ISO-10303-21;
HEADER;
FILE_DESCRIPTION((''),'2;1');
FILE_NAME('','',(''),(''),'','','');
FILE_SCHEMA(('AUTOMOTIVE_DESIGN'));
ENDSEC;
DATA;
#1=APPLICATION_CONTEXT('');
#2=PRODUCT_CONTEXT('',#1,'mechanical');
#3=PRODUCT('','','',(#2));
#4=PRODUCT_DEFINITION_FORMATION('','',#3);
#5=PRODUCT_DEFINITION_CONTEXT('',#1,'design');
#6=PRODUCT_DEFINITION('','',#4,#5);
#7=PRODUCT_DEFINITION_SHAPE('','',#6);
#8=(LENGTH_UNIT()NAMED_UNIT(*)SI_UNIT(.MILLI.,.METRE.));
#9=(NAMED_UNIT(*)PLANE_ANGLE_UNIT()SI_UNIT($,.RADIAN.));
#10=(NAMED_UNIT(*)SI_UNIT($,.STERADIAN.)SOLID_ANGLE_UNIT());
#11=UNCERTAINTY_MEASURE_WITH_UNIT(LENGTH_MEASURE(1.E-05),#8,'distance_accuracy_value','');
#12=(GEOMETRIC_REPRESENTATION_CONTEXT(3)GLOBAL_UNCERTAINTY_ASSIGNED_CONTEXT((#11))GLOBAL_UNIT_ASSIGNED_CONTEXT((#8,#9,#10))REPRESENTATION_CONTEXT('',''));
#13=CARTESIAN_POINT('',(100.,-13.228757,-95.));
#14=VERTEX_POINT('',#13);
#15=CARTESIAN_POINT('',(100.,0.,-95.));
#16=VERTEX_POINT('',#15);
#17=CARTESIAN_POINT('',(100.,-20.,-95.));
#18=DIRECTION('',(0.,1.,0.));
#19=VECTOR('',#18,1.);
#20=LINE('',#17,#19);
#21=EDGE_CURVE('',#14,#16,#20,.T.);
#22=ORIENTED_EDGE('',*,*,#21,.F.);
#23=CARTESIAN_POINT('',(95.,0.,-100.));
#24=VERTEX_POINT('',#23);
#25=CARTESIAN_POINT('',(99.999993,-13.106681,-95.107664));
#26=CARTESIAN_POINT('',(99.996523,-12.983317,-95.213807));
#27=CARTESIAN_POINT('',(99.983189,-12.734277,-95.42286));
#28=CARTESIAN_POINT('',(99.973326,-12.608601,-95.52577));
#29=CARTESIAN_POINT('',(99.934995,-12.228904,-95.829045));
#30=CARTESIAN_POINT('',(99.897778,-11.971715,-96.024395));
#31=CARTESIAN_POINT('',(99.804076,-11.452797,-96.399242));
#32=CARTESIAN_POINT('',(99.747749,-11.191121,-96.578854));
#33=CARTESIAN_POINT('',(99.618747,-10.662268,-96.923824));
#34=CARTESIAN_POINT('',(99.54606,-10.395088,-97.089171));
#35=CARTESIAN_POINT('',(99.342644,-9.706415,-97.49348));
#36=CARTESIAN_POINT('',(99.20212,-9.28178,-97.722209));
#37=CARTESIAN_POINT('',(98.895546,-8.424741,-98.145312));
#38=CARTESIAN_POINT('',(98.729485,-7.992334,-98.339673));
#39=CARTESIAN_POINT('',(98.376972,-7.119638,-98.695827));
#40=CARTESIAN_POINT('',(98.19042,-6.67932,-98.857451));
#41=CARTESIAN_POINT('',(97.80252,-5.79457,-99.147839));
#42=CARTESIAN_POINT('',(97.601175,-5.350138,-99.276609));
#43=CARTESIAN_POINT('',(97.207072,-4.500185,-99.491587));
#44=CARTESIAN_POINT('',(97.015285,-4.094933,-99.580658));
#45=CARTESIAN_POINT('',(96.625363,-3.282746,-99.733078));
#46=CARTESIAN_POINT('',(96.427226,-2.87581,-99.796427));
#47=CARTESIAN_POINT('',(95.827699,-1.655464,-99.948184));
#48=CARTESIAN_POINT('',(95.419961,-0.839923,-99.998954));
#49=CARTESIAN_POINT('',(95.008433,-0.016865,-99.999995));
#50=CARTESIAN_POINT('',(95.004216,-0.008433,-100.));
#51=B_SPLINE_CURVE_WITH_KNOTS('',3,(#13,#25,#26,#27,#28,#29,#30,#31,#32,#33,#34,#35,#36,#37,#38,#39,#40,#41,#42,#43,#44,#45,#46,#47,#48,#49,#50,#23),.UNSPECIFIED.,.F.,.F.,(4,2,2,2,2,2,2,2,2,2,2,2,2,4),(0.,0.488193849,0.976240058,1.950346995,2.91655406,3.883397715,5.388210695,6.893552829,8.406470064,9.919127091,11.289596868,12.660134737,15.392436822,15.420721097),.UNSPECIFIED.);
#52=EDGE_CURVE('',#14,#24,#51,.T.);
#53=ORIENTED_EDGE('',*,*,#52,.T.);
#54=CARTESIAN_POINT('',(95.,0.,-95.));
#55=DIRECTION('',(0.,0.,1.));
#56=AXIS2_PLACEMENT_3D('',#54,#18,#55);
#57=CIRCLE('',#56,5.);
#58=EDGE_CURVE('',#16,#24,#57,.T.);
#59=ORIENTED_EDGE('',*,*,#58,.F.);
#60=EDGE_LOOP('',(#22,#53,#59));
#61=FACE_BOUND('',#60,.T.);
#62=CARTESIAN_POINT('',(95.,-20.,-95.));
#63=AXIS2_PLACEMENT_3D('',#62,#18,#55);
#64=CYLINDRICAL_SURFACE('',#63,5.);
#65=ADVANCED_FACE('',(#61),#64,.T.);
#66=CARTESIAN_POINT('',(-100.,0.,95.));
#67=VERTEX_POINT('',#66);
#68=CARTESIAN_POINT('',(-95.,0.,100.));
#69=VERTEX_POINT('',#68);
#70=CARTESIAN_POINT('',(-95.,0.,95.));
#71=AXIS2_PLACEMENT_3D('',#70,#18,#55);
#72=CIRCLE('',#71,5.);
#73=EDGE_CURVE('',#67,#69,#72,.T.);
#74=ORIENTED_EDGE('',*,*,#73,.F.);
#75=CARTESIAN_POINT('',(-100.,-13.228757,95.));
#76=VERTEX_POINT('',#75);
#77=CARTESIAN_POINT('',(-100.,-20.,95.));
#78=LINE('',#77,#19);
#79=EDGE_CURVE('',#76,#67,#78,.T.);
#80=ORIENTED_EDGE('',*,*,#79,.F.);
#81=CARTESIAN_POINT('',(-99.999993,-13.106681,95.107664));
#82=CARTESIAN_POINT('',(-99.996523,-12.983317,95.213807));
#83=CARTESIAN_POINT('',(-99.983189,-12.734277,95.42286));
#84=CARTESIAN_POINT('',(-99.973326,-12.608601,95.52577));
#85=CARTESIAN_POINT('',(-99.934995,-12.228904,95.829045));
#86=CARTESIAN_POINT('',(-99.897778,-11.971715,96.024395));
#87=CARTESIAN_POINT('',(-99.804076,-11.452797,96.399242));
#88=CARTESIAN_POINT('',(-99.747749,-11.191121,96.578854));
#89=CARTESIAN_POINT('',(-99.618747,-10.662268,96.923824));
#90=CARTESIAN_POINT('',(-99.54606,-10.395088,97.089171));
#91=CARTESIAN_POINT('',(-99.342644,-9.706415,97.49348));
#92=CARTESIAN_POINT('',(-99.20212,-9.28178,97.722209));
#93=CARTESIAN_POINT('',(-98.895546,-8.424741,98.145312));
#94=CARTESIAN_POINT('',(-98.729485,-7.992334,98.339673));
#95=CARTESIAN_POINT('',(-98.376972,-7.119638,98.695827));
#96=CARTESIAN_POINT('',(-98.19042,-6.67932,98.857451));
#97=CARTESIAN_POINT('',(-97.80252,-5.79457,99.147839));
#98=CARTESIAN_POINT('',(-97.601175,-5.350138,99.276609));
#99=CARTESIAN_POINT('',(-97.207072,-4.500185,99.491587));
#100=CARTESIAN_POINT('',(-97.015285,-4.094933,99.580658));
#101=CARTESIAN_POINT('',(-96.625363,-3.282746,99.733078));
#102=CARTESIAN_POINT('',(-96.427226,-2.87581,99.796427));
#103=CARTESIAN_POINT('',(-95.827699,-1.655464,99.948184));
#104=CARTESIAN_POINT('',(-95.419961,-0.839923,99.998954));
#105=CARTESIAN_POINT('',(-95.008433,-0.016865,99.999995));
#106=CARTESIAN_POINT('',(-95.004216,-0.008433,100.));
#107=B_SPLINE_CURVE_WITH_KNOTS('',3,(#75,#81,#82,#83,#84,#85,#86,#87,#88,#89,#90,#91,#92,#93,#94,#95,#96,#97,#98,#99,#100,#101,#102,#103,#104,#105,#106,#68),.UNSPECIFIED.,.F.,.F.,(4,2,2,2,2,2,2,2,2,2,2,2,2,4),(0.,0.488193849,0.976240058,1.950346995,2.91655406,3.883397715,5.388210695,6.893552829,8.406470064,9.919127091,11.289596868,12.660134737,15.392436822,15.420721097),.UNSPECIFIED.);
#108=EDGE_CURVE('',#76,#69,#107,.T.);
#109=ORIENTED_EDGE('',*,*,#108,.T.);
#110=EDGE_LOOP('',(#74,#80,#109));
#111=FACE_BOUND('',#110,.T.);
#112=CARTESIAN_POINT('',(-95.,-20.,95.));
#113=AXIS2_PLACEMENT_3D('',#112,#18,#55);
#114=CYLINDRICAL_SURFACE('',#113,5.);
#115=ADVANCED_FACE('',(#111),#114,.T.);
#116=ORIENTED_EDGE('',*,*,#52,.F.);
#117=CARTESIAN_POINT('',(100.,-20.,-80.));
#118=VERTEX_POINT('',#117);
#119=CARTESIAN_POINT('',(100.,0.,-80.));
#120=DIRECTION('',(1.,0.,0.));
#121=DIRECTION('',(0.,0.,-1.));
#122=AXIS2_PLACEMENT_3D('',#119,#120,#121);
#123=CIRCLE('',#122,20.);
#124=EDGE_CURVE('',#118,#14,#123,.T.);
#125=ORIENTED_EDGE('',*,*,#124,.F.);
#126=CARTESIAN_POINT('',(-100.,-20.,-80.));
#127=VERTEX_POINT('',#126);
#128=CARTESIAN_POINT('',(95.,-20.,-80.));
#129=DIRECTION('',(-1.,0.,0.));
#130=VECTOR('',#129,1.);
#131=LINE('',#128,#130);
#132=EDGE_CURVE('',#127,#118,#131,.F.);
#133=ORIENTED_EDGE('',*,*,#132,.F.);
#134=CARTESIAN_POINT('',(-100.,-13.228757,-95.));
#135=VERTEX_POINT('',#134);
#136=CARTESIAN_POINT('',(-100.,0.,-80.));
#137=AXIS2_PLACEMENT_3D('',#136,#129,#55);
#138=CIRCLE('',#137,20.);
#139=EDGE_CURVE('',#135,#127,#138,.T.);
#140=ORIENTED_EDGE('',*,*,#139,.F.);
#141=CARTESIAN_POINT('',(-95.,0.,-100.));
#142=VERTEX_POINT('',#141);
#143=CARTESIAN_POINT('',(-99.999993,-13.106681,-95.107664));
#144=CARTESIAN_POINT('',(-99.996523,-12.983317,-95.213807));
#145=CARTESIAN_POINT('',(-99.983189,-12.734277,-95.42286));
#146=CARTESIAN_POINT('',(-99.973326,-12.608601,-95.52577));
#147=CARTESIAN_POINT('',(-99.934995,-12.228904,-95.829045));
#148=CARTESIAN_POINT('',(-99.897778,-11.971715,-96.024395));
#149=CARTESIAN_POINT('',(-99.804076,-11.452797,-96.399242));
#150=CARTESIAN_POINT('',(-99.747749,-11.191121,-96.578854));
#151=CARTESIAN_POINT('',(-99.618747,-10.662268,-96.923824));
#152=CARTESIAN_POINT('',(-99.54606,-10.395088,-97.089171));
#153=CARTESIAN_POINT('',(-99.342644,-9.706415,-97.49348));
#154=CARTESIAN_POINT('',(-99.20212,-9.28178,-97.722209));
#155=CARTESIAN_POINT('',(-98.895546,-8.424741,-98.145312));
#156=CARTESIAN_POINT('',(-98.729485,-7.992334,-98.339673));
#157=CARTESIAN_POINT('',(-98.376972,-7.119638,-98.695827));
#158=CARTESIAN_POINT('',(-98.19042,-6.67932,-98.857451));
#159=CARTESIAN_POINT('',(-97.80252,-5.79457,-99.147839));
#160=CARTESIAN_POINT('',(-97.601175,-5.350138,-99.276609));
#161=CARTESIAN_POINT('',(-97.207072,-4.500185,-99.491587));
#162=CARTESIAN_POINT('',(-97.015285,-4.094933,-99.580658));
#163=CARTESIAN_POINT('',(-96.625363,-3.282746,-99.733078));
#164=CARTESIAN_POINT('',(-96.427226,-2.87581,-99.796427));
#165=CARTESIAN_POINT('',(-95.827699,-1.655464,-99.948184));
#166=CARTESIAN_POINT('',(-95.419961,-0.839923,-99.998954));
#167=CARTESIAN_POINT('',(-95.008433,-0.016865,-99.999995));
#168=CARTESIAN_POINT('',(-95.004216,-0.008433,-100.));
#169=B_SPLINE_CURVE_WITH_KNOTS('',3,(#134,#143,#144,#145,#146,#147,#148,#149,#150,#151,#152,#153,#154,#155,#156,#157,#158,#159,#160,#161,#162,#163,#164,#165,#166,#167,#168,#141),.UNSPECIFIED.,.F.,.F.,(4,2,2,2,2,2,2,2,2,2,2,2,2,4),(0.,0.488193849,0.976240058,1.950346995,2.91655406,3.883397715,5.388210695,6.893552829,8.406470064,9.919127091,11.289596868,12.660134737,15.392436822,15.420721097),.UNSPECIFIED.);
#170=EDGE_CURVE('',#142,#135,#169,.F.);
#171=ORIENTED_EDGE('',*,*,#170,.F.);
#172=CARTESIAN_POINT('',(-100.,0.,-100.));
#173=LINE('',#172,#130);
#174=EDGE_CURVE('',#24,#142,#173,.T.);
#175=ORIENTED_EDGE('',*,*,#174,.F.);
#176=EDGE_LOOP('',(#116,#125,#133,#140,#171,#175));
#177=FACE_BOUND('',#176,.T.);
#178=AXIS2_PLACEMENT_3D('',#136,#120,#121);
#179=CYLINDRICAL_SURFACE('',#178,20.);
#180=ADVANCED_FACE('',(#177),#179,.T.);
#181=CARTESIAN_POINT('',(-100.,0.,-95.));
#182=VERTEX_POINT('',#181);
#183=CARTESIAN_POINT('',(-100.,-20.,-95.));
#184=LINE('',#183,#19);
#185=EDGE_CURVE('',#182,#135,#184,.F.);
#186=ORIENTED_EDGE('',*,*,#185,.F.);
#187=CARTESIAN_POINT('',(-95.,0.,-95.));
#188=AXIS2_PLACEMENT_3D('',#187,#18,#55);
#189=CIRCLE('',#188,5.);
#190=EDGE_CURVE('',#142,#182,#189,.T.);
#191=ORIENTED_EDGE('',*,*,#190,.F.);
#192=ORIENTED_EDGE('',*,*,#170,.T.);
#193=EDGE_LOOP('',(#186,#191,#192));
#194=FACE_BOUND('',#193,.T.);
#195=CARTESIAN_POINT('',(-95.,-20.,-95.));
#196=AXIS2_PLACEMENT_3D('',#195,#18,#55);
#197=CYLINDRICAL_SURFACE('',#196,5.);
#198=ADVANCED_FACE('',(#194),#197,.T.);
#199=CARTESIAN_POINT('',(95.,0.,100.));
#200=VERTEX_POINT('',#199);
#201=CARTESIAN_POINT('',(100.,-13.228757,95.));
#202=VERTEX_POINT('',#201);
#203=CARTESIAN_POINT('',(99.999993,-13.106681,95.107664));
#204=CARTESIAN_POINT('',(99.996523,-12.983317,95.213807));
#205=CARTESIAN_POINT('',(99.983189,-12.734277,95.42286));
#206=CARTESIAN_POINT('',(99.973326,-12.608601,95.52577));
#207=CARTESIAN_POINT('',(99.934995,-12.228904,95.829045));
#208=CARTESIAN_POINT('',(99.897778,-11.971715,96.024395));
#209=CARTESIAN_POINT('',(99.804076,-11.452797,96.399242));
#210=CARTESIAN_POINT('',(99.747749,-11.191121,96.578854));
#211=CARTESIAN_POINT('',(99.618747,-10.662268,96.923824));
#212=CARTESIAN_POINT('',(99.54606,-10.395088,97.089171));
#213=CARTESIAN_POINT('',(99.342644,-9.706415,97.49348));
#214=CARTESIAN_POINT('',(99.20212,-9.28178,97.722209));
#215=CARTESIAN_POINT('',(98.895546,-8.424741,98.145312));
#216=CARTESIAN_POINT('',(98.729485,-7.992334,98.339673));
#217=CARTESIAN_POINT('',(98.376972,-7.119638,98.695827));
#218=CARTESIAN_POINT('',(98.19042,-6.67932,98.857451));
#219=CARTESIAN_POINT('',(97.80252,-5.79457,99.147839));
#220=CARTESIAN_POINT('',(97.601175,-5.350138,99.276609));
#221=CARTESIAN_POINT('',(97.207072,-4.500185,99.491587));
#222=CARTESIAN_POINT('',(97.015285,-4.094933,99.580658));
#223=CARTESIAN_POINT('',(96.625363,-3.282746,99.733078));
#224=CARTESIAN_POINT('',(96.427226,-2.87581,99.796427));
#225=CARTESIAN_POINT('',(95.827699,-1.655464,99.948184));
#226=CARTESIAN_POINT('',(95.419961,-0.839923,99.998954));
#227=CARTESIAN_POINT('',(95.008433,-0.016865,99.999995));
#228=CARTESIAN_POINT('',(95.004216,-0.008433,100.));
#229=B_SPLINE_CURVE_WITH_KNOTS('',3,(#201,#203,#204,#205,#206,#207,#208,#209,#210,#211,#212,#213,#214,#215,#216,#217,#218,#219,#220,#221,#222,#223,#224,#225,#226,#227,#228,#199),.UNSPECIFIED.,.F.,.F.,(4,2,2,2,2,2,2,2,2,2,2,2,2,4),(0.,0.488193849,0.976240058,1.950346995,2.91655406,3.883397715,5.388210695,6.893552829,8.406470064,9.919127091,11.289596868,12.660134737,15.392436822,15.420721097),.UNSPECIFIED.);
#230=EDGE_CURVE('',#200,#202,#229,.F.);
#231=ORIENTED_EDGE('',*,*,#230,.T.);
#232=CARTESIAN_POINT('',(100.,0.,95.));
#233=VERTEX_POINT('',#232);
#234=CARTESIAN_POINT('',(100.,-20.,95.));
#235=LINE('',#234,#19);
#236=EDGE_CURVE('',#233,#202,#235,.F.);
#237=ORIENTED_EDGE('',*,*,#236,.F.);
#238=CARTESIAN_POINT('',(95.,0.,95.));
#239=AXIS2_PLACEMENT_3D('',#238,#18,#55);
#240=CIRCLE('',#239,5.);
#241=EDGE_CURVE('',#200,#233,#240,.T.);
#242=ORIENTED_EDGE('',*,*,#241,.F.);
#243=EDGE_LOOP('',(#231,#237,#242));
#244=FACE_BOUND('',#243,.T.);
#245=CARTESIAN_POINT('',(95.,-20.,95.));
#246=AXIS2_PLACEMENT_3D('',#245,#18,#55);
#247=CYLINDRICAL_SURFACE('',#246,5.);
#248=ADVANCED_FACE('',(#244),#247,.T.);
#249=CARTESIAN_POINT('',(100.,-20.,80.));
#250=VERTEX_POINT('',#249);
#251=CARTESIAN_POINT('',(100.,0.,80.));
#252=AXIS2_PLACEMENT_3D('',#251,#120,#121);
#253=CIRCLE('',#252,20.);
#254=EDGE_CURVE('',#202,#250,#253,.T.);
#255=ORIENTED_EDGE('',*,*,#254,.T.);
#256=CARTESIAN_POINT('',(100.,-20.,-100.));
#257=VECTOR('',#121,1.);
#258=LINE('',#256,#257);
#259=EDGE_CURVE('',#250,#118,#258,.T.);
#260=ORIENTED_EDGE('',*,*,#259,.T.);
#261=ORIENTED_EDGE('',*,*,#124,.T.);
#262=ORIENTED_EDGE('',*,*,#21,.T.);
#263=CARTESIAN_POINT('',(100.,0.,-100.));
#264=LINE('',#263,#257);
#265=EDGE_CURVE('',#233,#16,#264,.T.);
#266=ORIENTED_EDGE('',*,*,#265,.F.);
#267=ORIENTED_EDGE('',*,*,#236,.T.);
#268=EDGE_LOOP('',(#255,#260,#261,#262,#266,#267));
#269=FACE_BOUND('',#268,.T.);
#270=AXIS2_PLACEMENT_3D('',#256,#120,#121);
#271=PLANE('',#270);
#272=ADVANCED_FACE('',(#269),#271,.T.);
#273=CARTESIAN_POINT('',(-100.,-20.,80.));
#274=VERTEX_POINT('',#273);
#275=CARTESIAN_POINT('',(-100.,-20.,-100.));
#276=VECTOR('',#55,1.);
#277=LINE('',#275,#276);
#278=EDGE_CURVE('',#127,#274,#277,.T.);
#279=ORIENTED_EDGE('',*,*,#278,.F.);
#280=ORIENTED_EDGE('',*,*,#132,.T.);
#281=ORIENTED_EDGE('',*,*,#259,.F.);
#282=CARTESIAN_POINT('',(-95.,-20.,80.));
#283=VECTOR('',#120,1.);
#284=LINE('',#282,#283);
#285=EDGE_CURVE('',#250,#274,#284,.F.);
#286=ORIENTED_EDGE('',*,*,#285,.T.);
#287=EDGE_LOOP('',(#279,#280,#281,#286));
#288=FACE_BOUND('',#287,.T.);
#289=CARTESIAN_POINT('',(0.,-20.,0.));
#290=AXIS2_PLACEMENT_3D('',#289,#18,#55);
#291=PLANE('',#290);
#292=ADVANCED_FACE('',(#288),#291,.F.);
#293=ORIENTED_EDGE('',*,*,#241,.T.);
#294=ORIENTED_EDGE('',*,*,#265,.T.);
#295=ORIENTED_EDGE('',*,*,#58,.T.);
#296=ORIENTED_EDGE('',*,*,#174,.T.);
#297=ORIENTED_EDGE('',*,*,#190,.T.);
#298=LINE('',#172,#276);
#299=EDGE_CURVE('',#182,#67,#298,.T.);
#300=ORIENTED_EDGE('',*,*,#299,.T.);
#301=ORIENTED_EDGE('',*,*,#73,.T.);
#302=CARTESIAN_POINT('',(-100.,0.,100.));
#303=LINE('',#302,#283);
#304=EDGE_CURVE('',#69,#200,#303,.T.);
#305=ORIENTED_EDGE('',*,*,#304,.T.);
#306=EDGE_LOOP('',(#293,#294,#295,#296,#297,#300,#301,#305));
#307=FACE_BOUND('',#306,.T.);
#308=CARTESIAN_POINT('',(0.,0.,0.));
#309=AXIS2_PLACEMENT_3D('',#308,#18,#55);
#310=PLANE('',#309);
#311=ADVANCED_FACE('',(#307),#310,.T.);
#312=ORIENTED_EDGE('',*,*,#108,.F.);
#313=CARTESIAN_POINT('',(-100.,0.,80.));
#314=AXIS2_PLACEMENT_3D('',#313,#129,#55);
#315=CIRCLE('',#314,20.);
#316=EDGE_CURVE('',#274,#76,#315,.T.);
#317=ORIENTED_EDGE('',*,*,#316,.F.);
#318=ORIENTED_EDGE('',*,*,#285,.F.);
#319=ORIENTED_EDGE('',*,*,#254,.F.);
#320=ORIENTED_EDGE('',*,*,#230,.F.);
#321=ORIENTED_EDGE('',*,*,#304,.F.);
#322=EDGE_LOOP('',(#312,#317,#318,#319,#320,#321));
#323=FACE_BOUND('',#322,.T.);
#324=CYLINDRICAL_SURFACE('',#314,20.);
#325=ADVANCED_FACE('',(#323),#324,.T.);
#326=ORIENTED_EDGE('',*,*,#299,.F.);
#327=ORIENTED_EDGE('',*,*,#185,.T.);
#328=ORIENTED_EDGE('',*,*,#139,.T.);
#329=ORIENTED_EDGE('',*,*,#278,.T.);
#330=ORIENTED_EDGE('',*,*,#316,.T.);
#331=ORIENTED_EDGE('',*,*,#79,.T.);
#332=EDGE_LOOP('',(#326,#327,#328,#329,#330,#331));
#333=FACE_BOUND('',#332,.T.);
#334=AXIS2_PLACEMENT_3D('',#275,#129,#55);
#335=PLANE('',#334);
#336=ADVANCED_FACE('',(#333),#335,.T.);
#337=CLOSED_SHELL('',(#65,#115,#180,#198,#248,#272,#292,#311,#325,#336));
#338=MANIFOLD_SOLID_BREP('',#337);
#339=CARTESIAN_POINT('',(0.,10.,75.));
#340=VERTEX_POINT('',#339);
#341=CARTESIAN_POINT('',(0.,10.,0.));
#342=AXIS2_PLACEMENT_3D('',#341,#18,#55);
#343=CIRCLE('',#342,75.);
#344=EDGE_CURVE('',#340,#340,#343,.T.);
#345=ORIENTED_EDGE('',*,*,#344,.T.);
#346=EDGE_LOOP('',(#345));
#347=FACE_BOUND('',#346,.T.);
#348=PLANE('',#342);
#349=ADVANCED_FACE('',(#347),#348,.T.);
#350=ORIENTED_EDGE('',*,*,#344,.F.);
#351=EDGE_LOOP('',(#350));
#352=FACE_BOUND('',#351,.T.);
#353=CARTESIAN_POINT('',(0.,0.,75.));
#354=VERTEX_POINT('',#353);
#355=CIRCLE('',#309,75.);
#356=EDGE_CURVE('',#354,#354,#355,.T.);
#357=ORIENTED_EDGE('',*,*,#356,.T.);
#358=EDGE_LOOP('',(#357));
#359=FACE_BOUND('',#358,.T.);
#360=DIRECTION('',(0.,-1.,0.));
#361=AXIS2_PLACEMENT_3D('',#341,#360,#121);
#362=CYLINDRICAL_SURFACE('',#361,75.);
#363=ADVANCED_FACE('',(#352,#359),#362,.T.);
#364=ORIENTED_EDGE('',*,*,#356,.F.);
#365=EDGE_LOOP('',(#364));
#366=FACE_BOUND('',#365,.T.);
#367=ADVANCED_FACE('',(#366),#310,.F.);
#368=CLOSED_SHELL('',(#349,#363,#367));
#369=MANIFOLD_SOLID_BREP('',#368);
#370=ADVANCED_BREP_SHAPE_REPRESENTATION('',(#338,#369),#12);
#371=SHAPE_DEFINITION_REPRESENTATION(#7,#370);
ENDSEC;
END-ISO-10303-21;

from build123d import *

# Parameters (mm, degrees)
TURNTABLE_SKETCH_R          = 75
TURNTABLE_EXTRUDE_DEPTH     = 10
SUPPORT_PLATE_SKETCH_W      = 200
SUPPORT_PLATE_SKETCH_H      = 200
SUPPORT_PLATE_EXTRUDE_DEPTH = 20
SUPPORT_PLATE_FILLET_R      = 5
BOTTOM_FILLET_R             = 20


with BuildPart() as part:
    # Turntable Sketch → Turntable Extrude (new body)
    with BuildSketch(Plane(origin=(0, 0, 0), x_dir=(1, 0, 0), z_dir=(0, 1, 0))):
        with Locations(Location((0, 0, 0), (0, 0, 270))):
            Circle(TURNTABLE_SKETCH_R)
    extrude(amount=TURNTABLE_EXTRUDE_DEPTH)


with BuildPart() as body_2:
    # Support Plate Sketch → Support Plate Extrude (new body)
    with BuildSketch(Plane(origin=(0, 0, 0), x_dir=(1, 0, 0), z_dir=(0, 1, 0))):
        Rectangle(SUPPORT_PLATE_SKETCH_W, SUPPORT_PLATE_SKETCH_H)
    extrude(amount=-SUPPORT_PLATE_EXTRUDE_DEPTH)

    # Support Plate Fillet
    support_plate_fillet_edges = [body_2.edges().sort_by_distance(p)[0] for p in [
        (100, -10, 100),
        (-100, -10, 100),
        (-100, -10, -100),
        (100, -10, -100),
    ]]
    fillet(support_plate_fillet_edges, radius=SUPPORT_PLATE_FILLET_R)

    # Bottom Fillet
    # the kernel refuses this fillet: 20 mm, written as the material it takes off along each edge
    with BuildSketch(Plane(origin=(-145, -20, -100), x_dir=(0, 1, 0), z_dir=(1, 0, 0))) as bottom_fillet_piece_1:
        with BuildLine():
            CenterArc((BOTTOM_FILLET_R, BOTTOM_FILLET_R), BOTTOM_FILLET_R, 180, 90)
            Line((0, BOTTOM_FILLET_R), (0, 0))
            Line((0, 0), (BOTTOM_FILLET_R, 0))
        make_face()
    extrude(amount=290, mode=Mode.SUBTRACT)
    with BuildSketch(Plane(origin=(145, -20, 100), x_dir=(0, 0, -1), z_dir=(-1, 0, 0))) as bottom_fillet_piece_2:
        with BuildLine():
            CenterArc((BOTTOM_FILLET_R, -BOTTOM_FILLET_R), BOTTOM_FILLET_R, 90, 90)
            Line((0, -BOTTOM_FILLET_R), (0, 0))
            Line((0, 0), (BOTTOM_FILLET_R, 0))
        make_face()
    extrude(amount=290, mode=Mode.SUBTRACT)


solid = Compound([part.part, body_2.part])
